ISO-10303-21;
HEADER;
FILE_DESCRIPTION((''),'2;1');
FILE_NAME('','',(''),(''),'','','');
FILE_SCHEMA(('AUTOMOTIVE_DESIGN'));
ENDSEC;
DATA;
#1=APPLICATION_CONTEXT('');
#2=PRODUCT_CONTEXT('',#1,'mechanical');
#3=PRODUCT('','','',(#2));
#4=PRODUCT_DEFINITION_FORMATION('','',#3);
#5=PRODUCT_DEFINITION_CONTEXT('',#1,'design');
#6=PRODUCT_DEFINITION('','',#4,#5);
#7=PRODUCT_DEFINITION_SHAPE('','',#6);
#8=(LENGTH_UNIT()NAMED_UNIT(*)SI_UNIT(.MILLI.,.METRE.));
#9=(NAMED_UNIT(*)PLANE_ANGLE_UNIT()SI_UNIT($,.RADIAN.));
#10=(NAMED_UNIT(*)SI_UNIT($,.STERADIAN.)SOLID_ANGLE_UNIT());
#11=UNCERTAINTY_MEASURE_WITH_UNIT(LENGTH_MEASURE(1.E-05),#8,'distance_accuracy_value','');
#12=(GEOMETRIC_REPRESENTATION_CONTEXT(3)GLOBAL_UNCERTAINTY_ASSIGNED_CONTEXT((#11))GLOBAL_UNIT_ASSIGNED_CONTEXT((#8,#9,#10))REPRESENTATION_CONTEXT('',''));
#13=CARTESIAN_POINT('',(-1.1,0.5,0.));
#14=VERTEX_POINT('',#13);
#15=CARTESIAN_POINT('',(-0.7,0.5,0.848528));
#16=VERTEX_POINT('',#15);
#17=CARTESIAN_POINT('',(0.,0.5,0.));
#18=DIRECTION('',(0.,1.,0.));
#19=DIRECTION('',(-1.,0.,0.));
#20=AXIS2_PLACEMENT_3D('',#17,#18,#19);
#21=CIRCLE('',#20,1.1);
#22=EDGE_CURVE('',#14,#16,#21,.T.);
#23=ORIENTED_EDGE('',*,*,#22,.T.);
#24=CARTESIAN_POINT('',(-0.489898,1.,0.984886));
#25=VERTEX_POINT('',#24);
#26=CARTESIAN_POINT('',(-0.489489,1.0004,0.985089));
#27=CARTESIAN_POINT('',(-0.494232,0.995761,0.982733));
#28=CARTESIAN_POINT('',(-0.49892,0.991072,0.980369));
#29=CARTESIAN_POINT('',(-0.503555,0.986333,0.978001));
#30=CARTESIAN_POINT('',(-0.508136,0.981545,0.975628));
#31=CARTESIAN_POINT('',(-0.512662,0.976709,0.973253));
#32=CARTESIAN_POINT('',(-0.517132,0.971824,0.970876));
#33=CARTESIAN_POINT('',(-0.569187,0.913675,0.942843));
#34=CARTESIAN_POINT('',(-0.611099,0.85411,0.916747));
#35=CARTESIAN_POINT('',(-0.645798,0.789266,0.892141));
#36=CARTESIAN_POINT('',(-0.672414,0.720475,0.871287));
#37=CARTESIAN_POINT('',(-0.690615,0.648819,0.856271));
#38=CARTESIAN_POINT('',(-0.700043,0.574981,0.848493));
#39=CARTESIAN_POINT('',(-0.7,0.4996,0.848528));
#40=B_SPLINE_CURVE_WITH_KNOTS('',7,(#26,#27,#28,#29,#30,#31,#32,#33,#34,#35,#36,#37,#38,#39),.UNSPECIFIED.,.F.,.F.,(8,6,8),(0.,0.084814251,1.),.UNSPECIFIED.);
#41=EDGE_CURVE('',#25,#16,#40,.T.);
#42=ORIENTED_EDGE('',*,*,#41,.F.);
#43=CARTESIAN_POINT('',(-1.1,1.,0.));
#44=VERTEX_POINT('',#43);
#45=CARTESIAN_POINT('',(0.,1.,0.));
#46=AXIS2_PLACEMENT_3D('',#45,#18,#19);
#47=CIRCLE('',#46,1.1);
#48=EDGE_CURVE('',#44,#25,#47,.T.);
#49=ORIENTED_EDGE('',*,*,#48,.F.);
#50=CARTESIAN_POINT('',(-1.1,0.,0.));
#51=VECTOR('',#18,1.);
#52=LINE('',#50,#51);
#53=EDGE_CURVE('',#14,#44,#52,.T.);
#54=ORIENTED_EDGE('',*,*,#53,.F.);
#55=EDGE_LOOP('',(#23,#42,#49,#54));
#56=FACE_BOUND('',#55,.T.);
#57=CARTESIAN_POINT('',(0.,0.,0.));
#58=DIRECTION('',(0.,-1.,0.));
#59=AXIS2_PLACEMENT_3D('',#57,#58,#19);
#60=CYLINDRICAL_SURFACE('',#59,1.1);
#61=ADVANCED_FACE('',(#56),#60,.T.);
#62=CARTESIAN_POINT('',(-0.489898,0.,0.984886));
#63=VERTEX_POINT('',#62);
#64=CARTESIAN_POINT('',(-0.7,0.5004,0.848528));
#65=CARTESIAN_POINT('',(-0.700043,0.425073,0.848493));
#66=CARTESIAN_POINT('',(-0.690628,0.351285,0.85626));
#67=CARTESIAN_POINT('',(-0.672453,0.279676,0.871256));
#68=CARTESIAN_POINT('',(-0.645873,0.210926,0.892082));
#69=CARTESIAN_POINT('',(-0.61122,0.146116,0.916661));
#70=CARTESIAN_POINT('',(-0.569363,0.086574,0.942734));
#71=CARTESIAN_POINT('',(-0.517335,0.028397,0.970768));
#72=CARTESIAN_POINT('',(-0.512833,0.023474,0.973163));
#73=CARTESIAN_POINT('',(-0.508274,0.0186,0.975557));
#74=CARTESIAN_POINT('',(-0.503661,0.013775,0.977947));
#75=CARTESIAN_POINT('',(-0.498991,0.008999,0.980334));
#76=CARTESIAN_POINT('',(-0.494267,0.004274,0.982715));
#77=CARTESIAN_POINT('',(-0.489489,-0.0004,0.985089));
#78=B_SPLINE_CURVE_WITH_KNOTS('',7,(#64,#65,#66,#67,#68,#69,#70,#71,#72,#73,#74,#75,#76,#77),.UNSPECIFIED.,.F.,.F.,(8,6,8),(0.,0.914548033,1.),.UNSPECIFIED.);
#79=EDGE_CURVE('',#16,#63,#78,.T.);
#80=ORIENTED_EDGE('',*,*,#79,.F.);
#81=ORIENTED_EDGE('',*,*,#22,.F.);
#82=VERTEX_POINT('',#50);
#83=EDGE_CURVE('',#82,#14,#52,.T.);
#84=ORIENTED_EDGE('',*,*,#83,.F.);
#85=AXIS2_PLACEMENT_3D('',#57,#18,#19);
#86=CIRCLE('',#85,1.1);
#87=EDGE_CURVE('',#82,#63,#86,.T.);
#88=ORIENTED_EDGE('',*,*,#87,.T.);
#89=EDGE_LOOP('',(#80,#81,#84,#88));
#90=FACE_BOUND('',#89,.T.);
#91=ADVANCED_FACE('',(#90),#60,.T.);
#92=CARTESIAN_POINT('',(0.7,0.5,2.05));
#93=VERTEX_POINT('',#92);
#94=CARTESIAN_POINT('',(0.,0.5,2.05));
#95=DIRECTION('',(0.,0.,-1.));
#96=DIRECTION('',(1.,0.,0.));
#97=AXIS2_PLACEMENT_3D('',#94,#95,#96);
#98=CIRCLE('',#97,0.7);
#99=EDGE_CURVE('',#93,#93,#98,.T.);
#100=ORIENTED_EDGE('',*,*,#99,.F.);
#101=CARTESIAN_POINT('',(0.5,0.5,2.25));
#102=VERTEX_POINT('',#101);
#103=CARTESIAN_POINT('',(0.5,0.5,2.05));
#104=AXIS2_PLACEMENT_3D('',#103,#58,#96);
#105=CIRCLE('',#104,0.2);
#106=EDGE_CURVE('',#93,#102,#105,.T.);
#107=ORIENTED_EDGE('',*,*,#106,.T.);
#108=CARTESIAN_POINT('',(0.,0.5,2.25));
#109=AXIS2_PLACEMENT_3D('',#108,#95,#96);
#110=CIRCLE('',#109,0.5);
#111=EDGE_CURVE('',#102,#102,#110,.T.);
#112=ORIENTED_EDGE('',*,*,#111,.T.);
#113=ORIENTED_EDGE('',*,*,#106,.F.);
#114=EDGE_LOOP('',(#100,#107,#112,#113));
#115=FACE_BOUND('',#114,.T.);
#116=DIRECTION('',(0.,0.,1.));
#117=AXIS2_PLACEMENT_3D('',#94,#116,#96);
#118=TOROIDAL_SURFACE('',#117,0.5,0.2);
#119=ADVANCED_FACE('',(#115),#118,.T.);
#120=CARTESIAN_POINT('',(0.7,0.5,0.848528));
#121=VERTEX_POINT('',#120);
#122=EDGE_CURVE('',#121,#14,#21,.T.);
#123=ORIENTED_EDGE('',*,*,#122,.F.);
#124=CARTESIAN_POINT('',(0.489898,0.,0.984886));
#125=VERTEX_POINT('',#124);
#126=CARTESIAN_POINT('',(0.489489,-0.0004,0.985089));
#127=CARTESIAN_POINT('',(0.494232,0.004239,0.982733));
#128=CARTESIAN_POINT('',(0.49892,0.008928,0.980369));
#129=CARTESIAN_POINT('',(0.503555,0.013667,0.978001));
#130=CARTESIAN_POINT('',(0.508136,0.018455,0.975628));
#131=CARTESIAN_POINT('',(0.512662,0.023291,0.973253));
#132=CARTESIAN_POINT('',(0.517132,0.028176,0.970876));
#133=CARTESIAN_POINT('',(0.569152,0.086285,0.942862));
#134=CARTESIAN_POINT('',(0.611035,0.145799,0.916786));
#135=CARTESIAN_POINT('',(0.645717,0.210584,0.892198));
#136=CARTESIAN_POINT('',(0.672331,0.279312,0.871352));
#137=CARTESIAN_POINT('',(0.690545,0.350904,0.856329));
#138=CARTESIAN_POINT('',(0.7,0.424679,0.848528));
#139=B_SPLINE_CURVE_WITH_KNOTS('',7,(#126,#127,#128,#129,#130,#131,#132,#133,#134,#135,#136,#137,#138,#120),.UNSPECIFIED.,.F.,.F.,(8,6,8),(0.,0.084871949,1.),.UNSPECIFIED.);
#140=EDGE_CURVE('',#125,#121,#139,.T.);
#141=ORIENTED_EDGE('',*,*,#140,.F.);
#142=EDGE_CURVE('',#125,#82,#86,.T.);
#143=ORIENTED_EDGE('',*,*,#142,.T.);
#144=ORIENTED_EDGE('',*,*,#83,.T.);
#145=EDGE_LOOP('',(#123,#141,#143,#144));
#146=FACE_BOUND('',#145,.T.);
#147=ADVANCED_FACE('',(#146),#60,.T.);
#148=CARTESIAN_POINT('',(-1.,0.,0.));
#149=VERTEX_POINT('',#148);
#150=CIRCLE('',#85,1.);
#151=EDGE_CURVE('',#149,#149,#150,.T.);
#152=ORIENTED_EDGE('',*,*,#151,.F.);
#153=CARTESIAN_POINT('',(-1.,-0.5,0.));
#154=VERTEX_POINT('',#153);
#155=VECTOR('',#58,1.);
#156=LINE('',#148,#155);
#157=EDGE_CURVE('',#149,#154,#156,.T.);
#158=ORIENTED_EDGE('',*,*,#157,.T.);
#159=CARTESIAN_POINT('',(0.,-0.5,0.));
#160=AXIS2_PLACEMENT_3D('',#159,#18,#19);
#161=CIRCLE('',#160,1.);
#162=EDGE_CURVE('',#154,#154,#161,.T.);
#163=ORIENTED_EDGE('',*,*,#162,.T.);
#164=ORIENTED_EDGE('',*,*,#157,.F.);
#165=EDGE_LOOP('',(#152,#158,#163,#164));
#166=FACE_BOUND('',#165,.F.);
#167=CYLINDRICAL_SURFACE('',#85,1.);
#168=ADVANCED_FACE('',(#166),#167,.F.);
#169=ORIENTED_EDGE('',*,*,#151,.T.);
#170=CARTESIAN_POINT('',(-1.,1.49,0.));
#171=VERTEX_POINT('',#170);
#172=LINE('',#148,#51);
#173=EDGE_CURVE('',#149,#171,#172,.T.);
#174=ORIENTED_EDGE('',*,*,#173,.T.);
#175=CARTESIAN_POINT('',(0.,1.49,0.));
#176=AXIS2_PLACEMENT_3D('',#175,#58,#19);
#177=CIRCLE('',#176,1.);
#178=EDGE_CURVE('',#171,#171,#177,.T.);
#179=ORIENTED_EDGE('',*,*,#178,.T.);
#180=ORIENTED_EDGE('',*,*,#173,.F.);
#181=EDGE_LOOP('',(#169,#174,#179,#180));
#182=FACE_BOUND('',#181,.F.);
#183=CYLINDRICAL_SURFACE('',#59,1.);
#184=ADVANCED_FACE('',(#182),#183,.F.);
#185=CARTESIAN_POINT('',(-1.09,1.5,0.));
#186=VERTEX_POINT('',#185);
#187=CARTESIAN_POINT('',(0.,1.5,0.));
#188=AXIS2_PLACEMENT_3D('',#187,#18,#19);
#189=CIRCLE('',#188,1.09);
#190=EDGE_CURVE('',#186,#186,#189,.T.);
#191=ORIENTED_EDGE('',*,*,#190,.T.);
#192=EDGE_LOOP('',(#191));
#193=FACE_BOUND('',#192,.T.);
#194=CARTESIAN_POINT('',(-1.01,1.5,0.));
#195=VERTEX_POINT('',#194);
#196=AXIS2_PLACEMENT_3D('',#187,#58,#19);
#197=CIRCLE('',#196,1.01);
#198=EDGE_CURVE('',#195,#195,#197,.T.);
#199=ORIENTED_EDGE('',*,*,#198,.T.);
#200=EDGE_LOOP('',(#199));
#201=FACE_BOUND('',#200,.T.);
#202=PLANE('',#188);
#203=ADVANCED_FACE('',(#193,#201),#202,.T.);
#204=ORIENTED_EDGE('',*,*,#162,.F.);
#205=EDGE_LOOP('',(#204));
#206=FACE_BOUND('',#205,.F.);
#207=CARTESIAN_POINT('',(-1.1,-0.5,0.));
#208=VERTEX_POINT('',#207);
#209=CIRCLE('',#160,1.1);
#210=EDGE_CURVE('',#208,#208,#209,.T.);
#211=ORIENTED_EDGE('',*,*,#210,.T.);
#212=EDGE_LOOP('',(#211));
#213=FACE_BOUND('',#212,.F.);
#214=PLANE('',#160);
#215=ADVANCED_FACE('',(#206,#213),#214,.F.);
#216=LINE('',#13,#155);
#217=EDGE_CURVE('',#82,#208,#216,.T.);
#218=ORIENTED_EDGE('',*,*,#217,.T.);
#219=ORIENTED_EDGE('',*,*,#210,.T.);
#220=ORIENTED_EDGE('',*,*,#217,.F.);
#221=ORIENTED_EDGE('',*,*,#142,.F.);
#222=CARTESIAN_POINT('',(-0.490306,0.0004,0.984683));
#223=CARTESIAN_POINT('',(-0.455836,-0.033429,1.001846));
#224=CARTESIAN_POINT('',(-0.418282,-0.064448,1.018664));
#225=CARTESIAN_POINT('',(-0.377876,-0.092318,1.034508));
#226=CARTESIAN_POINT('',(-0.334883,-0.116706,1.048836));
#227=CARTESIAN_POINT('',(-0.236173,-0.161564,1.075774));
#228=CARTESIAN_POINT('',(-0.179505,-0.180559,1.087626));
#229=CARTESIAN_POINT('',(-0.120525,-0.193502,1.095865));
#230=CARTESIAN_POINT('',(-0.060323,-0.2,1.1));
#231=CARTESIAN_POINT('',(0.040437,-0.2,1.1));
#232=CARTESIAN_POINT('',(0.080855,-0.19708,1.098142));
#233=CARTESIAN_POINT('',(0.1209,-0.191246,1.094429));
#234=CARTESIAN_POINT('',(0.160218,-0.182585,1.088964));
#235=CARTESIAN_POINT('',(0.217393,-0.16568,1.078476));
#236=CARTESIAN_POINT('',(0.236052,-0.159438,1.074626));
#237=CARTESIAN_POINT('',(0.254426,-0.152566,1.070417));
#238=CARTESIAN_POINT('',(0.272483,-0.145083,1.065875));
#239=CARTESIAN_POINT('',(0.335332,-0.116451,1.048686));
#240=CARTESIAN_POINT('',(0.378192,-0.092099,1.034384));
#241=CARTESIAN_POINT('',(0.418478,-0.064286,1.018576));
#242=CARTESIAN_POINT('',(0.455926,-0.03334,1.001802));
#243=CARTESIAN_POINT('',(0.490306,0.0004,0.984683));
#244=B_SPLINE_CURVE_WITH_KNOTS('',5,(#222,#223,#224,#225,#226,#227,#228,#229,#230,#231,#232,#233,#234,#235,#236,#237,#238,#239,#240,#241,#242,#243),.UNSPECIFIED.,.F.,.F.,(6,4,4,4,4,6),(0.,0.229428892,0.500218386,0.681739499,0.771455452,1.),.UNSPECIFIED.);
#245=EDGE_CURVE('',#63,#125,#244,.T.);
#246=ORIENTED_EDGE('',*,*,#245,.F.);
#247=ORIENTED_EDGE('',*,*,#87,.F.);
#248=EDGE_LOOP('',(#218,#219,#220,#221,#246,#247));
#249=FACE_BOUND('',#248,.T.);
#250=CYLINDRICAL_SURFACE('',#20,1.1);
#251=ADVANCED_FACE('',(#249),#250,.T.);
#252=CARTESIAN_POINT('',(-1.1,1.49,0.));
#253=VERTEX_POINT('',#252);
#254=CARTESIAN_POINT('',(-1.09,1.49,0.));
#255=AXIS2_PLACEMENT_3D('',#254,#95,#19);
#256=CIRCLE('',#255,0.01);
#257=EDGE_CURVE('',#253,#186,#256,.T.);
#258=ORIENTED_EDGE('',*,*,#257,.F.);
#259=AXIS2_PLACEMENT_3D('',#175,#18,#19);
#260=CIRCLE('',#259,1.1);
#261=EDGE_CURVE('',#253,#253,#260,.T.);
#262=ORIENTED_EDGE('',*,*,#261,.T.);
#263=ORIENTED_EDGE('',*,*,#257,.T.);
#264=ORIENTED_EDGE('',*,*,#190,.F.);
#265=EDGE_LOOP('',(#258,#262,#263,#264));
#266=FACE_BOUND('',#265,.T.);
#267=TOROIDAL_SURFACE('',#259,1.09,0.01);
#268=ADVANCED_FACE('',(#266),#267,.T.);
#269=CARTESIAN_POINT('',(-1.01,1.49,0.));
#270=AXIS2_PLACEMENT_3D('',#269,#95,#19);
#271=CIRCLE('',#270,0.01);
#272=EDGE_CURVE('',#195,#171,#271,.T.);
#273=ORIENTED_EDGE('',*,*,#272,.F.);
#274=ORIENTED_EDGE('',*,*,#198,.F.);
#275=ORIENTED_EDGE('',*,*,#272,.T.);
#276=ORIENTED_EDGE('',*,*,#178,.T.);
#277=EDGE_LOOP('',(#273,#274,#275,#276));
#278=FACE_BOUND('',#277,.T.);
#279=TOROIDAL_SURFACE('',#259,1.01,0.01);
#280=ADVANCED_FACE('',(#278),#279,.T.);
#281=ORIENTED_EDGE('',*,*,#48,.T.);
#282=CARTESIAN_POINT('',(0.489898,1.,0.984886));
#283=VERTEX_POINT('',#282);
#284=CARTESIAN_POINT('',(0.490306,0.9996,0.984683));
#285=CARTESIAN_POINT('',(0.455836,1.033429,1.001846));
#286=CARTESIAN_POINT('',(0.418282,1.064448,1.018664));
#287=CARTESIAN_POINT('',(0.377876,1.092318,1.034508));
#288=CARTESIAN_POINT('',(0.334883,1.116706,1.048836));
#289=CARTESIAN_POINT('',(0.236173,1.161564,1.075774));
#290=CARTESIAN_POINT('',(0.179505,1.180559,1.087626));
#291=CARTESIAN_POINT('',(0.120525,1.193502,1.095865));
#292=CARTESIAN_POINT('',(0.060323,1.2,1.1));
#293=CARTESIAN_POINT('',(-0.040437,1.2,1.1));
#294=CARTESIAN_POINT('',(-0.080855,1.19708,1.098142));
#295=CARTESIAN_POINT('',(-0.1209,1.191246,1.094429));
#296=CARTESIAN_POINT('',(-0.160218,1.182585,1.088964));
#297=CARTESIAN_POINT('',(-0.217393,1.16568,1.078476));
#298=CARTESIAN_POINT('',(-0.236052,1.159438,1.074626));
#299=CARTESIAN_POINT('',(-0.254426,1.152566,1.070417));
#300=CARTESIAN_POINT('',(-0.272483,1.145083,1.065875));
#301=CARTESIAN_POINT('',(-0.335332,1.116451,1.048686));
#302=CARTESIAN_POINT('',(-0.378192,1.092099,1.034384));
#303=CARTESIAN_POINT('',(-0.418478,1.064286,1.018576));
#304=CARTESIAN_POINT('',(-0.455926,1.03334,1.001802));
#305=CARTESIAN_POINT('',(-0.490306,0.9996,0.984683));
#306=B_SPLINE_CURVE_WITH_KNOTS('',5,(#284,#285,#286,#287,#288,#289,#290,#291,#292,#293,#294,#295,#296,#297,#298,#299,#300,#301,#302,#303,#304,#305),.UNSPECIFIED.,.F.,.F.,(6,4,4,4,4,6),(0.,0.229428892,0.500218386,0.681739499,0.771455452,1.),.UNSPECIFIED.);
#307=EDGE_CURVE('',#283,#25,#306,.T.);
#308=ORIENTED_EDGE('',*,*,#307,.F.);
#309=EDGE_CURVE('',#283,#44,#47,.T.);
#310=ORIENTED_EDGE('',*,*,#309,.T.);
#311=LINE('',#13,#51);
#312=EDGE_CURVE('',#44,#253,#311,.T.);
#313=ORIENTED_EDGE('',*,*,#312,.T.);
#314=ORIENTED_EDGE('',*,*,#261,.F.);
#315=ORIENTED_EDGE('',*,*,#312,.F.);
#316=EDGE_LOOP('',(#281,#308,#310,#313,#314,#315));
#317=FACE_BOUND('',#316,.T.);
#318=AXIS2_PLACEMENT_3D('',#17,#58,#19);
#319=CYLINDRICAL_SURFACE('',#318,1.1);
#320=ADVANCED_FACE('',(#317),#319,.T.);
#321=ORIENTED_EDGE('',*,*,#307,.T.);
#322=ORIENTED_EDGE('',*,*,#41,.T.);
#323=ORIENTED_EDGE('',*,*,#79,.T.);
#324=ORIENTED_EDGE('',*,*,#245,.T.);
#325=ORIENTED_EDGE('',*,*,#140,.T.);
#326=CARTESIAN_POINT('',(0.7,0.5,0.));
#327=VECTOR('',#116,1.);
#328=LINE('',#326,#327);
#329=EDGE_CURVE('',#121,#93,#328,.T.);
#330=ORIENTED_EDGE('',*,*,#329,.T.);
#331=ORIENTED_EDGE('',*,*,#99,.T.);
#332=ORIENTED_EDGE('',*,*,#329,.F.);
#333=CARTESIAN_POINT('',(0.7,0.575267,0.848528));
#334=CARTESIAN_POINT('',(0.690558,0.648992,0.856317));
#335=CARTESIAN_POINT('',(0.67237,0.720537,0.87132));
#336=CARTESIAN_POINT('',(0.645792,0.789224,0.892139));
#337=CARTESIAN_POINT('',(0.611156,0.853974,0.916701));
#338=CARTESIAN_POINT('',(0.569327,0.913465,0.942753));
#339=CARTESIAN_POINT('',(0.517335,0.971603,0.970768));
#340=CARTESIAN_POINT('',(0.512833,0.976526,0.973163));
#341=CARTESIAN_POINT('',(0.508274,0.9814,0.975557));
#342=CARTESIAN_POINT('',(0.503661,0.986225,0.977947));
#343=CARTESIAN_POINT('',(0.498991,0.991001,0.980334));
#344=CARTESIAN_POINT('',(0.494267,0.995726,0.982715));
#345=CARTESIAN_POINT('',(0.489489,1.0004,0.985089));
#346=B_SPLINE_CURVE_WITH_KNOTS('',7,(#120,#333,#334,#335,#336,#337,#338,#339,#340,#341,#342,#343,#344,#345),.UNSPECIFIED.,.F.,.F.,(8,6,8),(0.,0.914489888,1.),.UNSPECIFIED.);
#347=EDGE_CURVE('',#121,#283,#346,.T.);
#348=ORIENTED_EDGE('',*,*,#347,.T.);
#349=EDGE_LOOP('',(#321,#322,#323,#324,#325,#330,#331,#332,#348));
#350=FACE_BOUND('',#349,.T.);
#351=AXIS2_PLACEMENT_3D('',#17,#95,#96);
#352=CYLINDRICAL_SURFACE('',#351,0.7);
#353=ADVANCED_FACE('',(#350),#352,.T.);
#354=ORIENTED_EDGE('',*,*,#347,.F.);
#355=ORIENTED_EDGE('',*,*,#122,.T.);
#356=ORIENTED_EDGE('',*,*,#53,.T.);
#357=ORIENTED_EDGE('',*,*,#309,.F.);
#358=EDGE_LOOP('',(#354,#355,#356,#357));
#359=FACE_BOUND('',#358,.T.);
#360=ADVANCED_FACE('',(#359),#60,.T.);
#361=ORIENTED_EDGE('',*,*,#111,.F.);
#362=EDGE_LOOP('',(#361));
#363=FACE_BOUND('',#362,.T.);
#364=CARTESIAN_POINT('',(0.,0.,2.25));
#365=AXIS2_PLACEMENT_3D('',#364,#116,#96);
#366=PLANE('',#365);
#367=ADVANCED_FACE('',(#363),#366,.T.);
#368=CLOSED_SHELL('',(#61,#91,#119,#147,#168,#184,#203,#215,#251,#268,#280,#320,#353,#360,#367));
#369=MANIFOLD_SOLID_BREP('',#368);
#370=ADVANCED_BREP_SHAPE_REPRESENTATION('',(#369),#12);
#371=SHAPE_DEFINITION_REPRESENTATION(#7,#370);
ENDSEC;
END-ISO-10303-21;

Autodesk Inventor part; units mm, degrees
ref_plane "YZ Plane" through (0, 0, 0) normal (1, 0, 0) x (0, 1, 0)
ref_plane "XY Plane" through (0, 0, 0) normal (0, 0, 1) x (1, 0, 0)
sketch "Sketch1" plane through (0, 0, 0) normal (0, 1, 0) x (-1, 0, 0)
  circle A0 centre (0, 0) radius 1
  circle A1 centre (0, 0) radius 1.1
  dimension "d0" = 2
  dimension "d1" = 2.2
extrude "Extrusion1" add sketch "Sketch1" along normal blind 1
sketch "Sketch2" plane through (0, 0, 0) normal (0, 0, 1) x (1, 0, 0)
  line L0 (1.1, 1) -> (-1.1, 1) projected
  line L1 (1.1, 0) -> (-1.1, 0) projected
  line L2 (1.1, 1) -> (-1.1, 1) projected
  line L3 (-1.1, 0) -> (-1.1, 1) projected
  line L4 (1.1, 0) -> (1.1, 1) projected
  line L5 (1.1, 0) -> (-1.1, 0) projected
  circle A0 centre (0, 0.5) radius 0.7
  point P0 (0, 0)
  dimension "d4" = 1.4
sketch "Sketch3" plane through (0, 0, 0) normal (0, 1, 0) x (-1, 0, 0)
  circle A0 centre (0, 0) radius 1.1 projected
  circle A1 centre (0, 0) radius 1 projected
ref_plane "Work Plane1" through (0, 0.5, 0) normal (0, 1, 0) x (-1, 0, 0)
sketch "Sketch4" plane through (0, 0.5, 0) normal (0, 1, 0) x (-1, 0, 0)
  circle A0 centre (0, 0) radius 1.1 projected
extrude "Extrusion2" add sketch "Sketch4" along normal mid plane 2
extrude "Extrusion3" add sketch "Sketch2" along normal blind 2.25 contours A0 L1 L0 | L0 A0 | A0 L1
extrude "Extrusion4" cut sketch "Sketch3" along normal through all both and the other way through all contours A1
fillet "Fillet1" radius 0.01 2 edges at (1.1, 1.5, 0) (1, 1.5, 0)
fillet "Fillet2" radius 0.2 1 edges at (-0.7, 0.5, 2.25)
properties part number "cilindros de dedo gordo"
